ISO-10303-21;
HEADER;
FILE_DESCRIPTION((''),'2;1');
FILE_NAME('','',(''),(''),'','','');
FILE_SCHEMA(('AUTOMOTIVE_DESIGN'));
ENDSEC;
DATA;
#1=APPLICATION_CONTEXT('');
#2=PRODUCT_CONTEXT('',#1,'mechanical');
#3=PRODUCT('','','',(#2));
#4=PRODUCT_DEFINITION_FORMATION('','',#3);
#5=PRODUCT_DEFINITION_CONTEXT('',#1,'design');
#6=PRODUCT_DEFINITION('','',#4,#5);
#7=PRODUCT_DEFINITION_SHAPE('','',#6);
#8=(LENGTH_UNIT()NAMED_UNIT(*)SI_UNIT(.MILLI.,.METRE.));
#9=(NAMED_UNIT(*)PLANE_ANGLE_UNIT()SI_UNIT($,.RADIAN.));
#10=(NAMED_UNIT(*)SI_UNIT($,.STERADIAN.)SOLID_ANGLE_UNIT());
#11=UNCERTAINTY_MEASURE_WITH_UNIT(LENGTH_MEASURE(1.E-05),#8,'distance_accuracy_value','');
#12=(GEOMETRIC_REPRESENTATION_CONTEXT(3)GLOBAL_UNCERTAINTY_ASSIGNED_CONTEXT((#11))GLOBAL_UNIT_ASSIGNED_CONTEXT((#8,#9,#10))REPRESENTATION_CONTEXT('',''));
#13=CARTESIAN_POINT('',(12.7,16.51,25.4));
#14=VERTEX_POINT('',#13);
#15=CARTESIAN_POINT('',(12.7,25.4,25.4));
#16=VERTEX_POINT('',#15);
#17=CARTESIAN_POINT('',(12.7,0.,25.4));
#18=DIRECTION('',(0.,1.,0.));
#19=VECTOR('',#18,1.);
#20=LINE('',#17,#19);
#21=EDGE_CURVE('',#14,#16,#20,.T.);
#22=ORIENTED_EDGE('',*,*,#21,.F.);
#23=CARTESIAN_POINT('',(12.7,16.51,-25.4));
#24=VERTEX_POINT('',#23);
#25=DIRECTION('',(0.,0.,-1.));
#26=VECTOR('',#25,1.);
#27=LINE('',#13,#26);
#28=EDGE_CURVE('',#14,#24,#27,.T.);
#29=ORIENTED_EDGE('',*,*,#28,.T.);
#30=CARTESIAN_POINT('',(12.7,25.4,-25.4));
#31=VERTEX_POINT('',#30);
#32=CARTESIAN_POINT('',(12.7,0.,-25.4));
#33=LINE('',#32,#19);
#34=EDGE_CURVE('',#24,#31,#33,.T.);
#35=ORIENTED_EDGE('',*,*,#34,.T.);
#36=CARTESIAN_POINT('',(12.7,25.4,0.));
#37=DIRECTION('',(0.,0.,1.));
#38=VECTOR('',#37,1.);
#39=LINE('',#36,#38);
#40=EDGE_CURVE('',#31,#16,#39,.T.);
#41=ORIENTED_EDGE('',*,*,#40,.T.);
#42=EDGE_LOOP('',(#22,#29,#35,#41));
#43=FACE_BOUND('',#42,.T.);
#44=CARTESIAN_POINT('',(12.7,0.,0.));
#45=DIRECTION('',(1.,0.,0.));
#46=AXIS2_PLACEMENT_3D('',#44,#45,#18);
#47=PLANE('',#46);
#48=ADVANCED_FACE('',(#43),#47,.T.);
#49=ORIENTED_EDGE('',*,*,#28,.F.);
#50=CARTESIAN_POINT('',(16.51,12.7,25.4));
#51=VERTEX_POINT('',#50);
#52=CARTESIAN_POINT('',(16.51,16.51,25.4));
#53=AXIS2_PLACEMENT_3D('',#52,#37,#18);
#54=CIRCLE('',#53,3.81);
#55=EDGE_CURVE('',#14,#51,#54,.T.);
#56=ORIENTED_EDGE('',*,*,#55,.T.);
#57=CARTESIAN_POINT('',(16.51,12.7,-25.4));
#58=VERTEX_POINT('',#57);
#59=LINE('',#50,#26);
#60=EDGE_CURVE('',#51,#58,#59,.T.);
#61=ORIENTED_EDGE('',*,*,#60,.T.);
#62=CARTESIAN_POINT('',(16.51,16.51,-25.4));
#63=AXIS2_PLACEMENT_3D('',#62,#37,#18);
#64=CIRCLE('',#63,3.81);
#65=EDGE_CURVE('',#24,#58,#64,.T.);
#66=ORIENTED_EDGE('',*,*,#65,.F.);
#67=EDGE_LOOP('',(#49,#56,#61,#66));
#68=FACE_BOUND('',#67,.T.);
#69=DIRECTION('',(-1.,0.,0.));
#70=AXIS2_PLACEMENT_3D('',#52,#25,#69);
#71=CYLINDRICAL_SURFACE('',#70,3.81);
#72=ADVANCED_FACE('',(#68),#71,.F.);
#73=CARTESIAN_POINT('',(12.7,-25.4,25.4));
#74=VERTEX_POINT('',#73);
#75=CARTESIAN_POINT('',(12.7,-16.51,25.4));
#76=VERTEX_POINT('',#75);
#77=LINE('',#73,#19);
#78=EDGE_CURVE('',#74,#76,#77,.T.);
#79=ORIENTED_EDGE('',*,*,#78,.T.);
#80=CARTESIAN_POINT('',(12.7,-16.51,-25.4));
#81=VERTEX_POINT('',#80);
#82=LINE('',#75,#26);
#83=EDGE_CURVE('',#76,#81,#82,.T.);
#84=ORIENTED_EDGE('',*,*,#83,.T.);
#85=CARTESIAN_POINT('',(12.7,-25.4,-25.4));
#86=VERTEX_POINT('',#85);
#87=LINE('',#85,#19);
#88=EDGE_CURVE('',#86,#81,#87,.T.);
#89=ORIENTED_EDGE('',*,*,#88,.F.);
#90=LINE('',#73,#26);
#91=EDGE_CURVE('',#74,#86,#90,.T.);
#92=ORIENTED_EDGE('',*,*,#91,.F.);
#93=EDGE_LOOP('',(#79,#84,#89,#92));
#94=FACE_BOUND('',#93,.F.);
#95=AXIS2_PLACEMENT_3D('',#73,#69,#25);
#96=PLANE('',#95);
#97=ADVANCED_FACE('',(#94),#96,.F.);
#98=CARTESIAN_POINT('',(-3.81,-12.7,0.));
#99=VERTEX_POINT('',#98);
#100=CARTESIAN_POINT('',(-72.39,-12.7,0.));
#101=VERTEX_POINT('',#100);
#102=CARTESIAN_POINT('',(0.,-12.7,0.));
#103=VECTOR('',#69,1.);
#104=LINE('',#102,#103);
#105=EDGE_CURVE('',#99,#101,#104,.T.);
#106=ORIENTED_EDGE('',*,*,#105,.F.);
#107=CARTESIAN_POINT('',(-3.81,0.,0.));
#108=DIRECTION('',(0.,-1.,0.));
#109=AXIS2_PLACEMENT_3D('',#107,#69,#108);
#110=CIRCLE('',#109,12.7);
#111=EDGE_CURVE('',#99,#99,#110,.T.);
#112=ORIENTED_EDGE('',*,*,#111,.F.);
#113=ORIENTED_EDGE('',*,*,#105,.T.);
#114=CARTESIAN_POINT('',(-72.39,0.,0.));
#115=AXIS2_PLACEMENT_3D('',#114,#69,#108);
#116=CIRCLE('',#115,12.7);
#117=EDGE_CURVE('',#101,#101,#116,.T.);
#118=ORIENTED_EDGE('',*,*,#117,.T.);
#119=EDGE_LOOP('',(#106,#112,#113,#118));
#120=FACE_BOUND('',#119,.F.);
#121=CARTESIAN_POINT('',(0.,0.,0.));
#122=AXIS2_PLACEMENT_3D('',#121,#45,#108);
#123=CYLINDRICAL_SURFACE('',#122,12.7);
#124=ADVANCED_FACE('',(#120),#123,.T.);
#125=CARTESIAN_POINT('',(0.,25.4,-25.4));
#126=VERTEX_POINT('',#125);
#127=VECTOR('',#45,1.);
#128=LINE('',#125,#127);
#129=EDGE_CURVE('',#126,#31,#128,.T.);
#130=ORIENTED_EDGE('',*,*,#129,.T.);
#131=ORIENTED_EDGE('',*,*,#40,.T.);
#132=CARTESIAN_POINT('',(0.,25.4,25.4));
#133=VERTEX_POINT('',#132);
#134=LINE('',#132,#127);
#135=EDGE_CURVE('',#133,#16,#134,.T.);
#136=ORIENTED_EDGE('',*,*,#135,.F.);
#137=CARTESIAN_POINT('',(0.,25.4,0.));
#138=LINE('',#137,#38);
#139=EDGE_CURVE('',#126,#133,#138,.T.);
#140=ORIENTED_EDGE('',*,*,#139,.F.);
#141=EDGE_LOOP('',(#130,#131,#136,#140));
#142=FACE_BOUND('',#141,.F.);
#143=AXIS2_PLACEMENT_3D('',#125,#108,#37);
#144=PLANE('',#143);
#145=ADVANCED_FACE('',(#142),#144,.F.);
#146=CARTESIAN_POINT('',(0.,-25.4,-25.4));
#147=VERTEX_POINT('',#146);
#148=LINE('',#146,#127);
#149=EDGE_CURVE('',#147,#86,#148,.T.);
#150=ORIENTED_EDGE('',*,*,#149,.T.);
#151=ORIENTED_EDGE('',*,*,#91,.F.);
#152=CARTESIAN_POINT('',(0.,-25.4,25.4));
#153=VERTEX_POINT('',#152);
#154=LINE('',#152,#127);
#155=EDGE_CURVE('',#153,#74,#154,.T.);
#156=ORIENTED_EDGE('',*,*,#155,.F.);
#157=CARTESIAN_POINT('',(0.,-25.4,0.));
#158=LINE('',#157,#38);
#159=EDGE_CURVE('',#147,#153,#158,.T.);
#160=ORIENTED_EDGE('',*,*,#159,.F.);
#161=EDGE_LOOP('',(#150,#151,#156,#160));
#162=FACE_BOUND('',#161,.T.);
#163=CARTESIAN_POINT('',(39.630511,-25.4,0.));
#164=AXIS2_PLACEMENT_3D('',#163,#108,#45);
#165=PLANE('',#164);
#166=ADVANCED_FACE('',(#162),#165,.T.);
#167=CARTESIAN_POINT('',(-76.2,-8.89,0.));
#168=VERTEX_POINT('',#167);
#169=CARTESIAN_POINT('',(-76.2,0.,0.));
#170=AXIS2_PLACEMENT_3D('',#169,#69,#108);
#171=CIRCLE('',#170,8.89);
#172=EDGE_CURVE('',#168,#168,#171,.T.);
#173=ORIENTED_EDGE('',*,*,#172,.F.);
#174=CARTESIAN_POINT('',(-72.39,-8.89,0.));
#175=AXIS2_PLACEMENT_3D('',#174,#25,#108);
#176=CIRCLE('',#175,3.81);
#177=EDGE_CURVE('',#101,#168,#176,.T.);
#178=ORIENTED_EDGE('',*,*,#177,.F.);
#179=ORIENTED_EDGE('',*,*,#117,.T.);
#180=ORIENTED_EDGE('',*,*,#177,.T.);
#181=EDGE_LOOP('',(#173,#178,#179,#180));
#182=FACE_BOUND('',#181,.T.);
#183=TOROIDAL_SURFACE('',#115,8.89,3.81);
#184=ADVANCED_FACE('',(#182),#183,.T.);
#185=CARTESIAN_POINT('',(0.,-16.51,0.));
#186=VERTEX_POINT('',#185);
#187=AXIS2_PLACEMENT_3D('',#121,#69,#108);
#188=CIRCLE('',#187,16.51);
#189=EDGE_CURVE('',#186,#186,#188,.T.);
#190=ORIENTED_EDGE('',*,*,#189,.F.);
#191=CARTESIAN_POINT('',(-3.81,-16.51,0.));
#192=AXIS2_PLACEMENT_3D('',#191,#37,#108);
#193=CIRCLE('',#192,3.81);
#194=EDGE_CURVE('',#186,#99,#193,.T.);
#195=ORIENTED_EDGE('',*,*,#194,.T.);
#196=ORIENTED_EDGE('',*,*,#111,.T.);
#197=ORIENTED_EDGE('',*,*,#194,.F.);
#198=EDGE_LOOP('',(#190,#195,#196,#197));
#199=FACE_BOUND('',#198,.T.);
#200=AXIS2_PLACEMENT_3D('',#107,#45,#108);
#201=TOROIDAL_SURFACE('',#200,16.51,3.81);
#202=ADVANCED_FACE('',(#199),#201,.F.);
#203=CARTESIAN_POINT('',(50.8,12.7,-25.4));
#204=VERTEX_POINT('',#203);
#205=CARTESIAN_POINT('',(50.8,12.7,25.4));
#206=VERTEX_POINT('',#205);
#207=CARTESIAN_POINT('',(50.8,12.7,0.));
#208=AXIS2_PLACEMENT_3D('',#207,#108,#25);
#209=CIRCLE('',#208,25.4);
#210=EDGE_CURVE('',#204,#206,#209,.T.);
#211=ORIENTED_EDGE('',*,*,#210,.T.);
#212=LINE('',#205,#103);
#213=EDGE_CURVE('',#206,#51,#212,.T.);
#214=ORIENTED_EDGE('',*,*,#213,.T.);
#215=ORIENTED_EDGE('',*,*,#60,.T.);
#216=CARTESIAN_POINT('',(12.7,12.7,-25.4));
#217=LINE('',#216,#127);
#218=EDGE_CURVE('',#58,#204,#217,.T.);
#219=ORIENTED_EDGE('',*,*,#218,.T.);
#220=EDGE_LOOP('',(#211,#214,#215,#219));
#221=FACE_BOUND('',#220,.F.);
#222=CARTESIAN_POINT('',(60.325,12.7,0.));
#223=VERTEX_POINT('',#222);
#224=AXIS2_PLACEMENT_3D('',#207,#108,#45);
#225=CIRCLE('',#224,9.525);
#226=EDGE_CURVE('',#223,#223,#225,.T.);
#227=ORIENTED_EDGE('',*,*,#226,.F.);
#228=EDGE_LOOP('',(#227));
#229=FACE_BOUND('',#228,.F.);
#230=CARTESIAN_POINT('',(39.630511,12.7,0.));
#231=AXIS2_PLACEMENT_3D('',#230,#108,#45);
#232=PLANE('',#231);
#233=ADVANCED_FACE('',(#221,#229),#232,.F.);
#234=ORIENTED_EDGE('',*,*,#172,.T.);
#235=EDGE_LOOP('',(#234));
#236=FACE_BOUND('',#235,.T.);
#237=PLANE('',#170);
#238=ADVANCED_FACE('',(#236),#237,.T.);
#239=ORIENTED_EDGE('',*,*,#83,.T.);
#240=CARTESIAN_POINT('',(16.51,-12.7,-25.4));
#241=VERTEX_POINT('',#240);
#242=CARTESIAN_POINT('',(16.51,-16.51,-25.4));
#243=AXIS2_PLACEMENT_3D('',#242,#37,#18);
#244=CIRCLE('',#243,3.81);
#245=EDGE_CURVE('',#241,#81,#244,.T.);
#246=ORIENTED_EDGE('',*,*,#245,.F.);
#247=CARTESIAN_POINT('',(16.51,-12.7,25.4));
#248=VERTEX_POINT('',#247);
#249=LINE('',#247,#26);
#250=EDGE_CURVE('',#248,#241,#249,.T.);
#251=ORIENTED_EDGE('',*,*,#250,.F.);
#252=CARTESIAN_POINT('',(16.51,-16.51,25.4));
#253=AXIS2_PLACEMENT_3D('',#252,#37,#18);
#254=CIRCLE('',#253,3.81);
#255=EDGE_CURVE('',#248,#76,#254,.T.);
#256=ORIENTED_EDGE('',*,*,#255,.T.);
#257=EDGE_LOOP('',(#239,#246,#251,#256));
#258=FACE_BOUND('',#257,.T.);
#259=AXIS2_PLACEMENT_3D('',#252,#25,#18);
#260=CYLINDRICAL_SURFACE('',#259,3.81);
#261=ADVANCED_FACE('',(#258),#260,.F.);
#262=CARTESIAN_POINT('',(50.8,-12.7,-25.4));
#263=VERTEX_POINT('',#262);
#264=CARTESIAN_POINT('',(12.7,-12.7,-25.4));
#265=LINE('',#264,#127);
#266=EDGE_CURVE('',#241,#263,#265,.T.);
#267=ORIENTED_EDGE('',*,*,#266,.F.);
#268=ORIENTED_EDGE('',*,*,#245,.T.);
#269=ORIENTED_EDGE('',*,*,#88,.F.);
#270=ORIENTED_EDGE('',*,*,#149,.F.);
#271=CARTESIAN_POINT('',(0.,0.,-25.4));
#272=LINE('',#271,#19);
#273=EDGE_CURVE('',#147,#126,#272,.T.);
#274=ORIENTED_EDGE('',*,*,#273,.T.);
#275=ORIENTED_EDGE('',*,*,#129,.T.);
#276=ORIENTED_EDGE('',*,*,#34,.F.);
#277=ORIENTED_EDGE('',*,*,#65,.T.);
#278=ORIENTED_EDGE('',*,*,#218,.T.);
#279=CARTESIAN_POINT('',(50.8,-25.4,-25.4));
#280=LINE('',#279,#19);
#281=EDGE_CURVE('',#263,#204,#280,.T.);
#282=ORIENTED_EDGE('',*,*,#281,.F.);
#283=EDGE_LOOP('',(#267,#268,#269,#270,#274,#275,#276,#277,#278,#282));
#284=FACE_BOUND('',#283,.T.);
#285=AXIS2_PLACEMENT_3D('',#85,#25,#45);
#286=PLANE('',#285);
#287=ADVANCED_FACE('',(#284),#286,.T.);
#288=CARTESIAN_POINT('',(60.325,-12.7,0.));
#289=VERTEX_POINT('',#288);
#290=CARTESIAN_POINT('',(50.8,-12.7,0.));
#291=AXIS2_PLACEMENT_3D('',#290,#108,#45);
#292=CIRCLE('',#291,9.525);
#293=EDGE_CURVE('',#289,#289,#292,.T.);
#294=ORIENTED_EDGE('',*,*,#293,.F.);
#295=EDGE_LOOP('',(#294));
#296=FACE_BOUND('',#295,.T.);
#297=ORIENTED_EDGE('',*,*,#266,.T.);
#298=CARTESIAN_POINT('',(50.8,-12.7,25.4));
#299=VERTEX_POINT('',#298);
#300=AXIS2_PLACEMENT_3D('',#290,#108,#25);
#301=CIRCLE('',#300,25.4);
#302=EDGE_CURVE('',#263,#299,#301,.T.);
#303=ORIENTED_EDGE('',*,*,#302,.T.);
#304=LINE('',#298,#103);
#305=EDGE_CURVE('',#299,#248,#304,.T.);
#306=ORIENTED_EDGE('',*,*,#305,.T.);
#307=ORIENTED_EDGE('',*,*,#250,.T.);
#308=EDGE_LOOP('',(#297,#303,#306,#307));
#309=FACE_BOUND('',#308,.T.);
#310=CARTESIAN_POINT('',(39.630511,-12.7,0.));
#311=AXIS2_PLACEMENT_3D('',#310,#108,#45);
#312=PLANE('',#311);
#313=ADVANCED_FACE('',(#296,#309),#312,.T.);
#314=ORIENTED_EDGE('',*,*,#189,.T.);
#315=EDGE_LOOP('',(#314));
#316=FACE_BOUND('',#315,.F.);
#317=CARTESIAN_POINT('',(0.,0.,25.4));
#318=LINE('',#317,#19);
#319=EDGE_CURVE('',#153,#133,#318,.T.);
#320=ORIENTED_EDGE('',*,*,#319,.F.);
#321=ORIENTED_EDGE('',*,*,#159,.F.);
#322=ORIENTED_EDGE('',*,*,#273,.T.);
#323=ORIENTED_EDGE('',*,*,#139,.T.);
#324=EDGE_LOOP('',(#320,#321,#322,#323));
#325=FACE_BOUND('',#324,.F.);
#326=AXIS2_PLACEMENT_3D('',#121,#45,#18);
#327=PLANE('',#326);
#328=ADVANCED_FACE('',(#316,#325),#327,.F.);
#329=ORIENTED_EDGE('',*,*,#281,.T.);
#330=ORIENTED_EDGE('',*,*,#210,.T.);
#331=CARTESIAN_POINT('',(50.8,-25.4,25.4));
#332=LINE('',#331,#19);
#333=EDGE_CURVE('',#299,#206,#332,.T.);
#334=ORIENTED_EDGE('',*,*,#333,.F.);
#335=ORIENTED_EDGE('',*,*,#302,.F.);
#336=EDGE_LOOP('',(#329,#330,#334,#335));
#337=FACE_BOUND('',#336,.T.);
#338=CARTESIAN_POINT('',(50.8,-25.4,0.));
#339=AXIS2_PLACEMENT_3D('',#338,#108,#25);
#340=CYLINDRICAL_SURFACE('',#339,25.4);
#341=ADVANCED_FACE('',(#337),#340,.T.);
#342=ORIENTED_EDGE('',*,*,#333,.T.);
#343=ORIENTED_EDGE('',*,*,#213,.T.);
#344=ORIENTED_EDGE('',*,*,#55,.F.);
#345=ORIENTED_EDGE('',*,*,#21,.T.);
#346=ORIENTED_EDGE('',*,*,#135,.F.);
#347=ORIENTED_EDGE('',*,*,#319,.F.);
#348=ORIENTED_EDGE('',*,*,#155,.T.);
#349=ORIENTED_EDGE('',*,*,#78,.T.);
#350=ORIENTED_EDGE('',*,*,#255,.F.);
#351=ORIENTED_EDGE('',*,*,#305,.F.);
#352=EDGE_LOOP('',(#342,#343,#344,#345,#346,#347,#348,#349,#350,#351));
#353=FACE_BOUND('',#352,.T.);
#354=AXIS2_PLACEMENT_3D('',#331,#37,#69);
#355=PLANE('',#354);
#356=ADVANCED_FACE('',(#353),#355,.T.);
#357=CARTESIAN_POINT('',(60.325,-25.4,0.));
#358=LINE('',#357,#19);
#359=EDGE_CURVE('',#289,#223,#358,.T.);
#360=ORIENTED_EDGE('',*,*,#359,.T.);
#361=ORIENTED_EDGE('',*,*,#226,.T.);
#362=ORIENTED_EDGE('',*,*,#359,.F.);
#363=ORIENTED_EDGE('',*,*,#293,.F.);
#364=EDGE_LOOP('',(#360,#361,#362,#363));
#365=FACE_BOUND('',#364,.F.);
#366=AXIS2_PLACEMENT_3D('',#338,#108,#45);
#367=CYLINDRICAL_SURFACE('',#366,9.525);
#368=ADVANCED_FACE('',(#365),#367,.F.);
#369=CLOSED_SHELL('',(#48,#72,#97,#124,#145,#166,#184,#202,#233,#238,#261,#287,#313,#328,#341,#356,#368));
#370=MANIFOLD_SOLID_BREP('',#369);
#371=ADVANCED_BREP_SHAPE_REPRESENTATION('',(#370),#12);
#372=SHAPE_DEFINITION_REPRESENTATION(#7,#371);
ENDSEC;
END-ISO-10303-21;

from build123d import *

# Parameters (mm, degrees)
F0_W     = 50.8
F0_H     = 50.8
F1_DEPTH = 12.7
F2_R     = 12.7
F3_DEPTH = 76.2
F4_R     = 9.525
F5_DEPTH = 38.1
F6_DEPTH = 12.7
F7_R     = 3.81


with BuildPart() as f1:
    # F0 (on Right) → F1 (new body)
    with BuildSketch(Plane.YZ):
        Rectangle(F0_W, F0_H)
    extrude(amount=F1_DEPTH)

    # F2 (on face) → F3 (join)
    with BuildSketch(Plane(origin=(0, 0, 0), x_dir=(0, -1, 0), z_dir=(-1, 0, 0))):
        Circle(F2_R)
    extrude(amount=F3_DEPTH)

    # F4 (on face) → F5 (join)
    with BuildSketch(Plane.XZ.offset(25.4)):
        with BuildLine():
            Line((50.8, 25.4), (12.7, 25.4))
            Line((12.7, 25.4), (12.7, -25.4))
            Line((12.7, -25.4), (50.8, -25.4))
            ThreePointArc((50.8, -25.4), (76.2, 0), (50.8, 25.4))
        make_face()
        with Locations((50.8, 0)):
            Circle(F4_R, mode=Mode.SUBTRACT)
    extrude(amount=-F5_DEPTH)

    # F4 (on face) → F6 (cut)
    with BuildSketch(Plane.XZ.offset(25.4)):
        with BuildLine():
            Line((50.8, 25.4), (12.7, 25.4))
            Line((12.7, 25.4), (12.7, -25.4))
            Line((12.7, -25.4), (50.8, -25.4))
            ThreePointArc((50.8, -25.4), (76.2, 0), (50.8, 25.4))
        make_face()
        with Locations((50.8, 0)):
            Circle(F4_R, mode=Mode.SUBTRACT)
    extrude(amount=-F6_DEPTH, mode=Mode.SUBTRACT)

    # F7
    f7_edges = [f1.edges().sort_by_distance(p)[0] for p in [
        (-76.2, 12.7, 0),
        (0, 12.7, 0),
        (12.7, -12.7, 0),
        (12.7, 12.7, 0),
    ]]
    fillet(f7_edges, radius=F7_R)


solid = f1.part
